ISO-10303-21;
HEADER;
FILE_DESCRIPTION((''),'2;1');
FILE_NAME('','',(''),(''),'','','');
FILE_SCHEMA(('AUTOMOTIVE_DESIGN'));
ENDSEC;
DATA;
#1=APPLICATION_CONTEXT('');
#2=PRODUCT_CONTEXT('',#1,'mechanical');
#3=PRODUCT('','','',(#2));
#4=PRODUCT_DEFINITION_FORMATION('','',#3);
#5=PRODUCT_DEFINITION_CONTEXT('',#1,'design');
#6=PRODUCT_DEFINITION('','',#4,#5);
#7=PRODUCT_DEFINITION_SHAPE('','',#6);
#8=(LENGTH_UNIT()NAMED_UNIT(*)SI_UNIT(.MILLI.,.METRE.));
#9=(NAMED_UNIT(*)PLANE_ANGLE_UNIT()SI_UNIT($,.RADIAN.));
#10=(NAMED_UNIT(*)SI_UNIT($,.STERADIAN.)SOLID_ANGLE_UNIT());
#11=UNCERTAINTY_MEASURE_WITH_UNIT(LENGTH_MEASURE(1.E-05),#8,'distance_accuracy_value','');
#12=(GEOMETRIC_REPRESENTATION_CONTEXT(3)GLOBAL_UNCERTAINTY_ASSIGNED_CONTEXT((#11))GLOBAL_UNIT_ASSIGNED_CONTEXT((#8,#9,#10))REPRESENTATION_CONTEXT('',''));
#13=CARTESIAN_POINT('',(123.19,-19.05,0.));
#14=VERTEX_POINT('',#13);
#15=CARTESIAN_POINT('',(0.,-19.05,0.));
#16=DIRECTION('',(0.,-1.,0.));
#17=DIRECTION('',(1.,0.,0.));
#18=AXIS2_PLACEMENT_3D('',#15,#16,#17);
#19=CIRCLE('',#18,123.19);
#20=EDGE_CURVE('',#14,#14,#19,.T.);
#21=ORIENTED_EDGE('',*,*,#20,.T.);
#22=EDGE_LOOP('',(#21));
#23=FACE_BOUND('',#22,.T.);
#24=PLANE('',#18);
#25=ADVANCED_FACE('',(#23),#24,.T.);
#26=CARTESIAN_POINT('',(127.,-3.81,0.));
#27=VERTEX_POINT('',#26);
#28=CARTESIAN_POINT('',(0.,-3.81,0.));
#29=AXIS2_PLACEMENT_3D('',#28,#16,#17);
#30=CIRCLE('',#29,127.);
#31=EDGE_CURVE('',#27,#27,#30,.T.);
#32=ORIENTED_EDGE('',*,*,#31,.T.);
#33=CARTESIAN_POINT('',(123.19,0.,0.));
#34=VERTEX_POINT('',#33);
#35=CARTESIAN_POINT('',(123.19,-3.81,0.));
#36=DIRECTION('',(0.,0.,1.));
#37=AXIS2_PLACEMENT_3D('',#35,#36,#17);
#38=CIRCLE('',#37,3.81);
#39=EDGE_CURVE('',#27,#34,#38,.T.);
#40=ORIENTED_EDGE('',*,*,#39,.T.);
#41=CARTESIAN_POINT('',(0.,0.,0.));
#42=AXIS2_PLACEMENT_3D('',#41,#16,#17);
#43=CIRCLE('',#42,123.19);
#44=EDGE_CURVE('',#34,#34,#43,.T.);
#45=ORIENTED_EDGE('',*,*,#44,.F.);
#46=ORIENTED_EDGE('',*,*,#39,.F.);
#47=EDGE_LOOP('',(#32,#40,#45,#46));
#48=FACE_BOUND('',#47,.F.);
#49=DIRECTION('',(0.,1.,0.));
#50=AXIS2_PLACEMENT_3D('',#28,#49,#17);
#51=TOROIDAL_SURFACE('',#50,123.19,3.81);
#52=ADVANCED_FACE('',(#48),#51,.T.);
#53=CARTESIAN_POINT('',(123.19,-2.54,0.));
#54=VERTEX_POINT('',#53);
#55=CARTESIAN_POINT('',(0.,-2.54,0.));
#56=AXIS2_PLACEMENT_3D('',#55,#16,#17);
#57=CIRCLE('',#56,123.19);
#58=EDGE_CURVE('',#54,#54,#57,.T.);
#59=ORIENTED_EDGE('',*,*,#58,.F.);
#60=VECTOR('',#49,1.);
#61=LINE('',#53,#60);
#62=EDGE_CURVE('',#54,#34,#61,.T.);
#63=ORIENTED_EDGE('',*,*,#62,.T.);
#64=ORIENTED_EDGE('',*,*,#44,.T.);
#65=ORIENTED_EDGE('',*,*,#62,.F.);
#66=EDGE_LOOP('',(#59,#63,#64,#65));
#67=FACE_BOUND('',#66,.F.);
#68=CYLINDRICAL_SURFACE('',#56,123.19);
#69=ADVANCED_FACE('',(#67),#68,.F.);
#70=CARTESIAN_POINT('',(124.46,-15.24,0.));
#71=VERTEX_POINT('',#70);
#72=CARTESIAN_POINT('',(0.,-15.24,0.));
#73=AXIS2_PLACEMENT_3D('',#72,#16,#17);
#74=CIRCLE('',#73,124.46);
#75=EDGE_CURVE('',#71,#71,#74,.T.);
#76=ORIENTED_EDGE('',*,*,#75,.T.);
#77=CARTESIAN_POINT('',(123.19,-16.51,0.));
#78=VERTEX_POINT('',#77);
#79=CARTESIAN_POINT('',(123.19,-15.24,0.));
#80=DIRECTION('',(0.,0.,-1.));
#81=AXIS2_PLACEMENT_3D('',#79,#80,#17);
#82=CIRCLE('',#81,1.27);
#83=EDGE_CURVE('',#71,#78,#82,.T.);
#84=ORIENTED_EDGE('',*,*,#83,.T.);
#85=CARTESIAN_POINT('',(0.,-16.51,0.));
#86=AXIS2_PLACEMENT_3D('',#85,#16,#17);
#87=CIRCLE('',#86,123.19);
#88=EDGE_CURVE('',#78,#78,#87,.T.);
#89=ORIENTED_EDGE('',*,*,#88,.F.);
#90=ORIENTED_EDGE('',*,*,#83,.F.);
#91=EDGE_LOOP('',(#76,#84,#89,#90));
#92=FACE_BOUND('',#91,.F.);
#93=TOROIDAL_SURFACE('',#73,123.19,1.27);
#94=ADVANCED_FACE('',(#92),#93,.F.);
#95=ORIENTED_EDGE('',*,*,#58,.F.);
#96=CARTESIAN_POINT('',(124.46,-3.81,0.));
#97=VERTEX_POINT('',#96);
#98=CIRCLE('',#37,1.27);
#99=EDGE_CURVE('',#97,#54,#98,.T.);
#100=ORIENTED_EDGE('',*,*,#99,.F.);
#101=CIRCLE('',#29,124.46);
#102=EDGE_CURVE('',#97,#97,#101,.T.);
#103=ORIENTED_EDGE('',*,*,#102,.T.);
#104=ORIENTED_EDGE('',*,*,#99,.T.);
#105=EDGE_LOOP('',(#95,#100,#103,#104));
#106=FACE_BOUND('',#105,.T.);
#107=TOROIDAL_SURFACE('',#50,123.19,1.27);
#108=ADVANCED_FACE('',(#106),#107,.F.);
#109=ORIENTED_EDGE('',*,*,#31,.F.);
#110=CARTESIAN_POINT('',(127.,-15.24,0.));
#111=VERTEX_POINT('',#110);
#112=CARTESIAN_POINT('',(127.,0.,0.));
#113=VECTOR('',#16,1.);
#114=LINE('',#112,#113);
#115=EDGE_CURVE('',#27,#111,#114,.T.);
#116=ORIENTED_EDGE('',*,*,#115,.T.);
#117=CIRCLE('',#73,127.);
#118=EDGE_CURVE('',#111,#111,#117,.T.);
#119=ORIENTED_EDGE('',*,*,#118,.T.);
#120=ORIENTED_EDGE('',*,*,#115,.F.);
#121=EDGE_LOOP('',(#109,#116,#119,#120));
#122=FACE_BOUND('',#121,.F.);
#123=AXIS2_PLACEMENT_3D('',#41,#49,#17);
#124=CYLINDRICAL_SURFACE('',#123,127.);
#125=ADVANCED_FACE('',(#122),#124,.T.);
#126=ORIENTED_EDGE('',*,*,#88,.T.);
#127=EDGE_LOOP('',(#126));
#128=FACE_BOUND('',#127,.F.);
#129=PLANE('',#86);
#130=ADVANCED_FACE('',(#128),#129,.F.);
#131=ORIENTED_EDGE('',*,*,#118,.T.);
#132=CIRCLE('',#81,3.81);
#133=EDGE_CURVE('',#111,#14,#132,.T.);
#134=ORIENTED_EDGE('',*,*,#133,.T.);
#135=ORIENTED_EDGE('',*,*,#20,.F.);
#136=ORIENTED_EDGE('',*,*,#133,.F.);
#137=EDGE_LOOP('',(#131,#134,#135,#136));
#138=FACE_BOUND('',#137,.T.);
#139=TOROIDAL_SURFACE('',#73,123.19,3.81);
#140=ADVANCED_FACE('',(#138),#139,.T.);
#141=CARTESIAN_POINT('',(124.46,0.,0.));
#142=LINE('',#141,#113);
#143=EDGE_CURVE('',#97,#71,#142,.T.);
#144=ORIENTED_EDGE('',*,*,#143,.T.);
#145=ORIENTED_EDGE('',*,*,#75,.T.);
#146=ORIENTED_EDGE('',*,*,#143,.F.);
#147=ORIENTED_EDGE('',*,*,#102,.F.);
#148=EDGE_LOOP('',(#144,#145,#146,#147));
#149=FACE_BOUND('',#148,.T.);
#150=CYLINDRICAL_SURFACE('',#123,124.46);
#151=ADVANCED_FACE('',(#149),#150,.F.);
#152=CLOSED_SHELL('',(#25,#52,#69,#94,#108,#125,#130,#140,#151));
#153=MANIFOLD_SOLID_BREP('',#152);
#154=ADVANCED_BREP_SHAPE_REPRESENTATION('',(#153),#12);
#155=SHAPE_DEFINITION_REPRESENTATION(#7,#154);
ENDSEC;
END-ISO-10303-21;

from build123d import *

# Parameters (mm, degrees)
F0_R     = 127
F1_DEPTH = 19.05
F2_R     = 3.81
F3_T     = -2.54


# Not quite as in the source:
# - a shell that OpenCascade refuses in one call is made with other operations: the cavity is built on its own and cut out


with BuildPart() as f1:
    # F0 (on Front) → F1 (new body)
    with BuildSketch(Plane.XZ):
        Circle(F0_R)
    extrude(amount=F1_DEPTH)

    # F2
    f2_edges = [f1.edges().sort_by_distance(p)[0] for p in [
        (-127, 0, 0),
        (-127, -19.05, 0),
    ]]
    fillet(f2_edges, radius=F2_R)

    # F3: a shell. OpenCascade refuses it in one call, so the cavity is built on its own and cut out:
    # the body offset inwards by the wall thickness, plus a prism from it out through each open face.
    f3_core = offset(f1.part, amount=F3_T, mode=Mode.PRIVATE)
    f3_exits = [f3_core.faces().sort_by_distance(p)[0] for p in [
        (0, -2.54, 0),
    ]]
    add(f3_core, mode=Mode.SUBTRACT)
    extrude(f3_exits, amount=-F3_T, mode=Mode.SUBTRACT)


solid = f1.part
